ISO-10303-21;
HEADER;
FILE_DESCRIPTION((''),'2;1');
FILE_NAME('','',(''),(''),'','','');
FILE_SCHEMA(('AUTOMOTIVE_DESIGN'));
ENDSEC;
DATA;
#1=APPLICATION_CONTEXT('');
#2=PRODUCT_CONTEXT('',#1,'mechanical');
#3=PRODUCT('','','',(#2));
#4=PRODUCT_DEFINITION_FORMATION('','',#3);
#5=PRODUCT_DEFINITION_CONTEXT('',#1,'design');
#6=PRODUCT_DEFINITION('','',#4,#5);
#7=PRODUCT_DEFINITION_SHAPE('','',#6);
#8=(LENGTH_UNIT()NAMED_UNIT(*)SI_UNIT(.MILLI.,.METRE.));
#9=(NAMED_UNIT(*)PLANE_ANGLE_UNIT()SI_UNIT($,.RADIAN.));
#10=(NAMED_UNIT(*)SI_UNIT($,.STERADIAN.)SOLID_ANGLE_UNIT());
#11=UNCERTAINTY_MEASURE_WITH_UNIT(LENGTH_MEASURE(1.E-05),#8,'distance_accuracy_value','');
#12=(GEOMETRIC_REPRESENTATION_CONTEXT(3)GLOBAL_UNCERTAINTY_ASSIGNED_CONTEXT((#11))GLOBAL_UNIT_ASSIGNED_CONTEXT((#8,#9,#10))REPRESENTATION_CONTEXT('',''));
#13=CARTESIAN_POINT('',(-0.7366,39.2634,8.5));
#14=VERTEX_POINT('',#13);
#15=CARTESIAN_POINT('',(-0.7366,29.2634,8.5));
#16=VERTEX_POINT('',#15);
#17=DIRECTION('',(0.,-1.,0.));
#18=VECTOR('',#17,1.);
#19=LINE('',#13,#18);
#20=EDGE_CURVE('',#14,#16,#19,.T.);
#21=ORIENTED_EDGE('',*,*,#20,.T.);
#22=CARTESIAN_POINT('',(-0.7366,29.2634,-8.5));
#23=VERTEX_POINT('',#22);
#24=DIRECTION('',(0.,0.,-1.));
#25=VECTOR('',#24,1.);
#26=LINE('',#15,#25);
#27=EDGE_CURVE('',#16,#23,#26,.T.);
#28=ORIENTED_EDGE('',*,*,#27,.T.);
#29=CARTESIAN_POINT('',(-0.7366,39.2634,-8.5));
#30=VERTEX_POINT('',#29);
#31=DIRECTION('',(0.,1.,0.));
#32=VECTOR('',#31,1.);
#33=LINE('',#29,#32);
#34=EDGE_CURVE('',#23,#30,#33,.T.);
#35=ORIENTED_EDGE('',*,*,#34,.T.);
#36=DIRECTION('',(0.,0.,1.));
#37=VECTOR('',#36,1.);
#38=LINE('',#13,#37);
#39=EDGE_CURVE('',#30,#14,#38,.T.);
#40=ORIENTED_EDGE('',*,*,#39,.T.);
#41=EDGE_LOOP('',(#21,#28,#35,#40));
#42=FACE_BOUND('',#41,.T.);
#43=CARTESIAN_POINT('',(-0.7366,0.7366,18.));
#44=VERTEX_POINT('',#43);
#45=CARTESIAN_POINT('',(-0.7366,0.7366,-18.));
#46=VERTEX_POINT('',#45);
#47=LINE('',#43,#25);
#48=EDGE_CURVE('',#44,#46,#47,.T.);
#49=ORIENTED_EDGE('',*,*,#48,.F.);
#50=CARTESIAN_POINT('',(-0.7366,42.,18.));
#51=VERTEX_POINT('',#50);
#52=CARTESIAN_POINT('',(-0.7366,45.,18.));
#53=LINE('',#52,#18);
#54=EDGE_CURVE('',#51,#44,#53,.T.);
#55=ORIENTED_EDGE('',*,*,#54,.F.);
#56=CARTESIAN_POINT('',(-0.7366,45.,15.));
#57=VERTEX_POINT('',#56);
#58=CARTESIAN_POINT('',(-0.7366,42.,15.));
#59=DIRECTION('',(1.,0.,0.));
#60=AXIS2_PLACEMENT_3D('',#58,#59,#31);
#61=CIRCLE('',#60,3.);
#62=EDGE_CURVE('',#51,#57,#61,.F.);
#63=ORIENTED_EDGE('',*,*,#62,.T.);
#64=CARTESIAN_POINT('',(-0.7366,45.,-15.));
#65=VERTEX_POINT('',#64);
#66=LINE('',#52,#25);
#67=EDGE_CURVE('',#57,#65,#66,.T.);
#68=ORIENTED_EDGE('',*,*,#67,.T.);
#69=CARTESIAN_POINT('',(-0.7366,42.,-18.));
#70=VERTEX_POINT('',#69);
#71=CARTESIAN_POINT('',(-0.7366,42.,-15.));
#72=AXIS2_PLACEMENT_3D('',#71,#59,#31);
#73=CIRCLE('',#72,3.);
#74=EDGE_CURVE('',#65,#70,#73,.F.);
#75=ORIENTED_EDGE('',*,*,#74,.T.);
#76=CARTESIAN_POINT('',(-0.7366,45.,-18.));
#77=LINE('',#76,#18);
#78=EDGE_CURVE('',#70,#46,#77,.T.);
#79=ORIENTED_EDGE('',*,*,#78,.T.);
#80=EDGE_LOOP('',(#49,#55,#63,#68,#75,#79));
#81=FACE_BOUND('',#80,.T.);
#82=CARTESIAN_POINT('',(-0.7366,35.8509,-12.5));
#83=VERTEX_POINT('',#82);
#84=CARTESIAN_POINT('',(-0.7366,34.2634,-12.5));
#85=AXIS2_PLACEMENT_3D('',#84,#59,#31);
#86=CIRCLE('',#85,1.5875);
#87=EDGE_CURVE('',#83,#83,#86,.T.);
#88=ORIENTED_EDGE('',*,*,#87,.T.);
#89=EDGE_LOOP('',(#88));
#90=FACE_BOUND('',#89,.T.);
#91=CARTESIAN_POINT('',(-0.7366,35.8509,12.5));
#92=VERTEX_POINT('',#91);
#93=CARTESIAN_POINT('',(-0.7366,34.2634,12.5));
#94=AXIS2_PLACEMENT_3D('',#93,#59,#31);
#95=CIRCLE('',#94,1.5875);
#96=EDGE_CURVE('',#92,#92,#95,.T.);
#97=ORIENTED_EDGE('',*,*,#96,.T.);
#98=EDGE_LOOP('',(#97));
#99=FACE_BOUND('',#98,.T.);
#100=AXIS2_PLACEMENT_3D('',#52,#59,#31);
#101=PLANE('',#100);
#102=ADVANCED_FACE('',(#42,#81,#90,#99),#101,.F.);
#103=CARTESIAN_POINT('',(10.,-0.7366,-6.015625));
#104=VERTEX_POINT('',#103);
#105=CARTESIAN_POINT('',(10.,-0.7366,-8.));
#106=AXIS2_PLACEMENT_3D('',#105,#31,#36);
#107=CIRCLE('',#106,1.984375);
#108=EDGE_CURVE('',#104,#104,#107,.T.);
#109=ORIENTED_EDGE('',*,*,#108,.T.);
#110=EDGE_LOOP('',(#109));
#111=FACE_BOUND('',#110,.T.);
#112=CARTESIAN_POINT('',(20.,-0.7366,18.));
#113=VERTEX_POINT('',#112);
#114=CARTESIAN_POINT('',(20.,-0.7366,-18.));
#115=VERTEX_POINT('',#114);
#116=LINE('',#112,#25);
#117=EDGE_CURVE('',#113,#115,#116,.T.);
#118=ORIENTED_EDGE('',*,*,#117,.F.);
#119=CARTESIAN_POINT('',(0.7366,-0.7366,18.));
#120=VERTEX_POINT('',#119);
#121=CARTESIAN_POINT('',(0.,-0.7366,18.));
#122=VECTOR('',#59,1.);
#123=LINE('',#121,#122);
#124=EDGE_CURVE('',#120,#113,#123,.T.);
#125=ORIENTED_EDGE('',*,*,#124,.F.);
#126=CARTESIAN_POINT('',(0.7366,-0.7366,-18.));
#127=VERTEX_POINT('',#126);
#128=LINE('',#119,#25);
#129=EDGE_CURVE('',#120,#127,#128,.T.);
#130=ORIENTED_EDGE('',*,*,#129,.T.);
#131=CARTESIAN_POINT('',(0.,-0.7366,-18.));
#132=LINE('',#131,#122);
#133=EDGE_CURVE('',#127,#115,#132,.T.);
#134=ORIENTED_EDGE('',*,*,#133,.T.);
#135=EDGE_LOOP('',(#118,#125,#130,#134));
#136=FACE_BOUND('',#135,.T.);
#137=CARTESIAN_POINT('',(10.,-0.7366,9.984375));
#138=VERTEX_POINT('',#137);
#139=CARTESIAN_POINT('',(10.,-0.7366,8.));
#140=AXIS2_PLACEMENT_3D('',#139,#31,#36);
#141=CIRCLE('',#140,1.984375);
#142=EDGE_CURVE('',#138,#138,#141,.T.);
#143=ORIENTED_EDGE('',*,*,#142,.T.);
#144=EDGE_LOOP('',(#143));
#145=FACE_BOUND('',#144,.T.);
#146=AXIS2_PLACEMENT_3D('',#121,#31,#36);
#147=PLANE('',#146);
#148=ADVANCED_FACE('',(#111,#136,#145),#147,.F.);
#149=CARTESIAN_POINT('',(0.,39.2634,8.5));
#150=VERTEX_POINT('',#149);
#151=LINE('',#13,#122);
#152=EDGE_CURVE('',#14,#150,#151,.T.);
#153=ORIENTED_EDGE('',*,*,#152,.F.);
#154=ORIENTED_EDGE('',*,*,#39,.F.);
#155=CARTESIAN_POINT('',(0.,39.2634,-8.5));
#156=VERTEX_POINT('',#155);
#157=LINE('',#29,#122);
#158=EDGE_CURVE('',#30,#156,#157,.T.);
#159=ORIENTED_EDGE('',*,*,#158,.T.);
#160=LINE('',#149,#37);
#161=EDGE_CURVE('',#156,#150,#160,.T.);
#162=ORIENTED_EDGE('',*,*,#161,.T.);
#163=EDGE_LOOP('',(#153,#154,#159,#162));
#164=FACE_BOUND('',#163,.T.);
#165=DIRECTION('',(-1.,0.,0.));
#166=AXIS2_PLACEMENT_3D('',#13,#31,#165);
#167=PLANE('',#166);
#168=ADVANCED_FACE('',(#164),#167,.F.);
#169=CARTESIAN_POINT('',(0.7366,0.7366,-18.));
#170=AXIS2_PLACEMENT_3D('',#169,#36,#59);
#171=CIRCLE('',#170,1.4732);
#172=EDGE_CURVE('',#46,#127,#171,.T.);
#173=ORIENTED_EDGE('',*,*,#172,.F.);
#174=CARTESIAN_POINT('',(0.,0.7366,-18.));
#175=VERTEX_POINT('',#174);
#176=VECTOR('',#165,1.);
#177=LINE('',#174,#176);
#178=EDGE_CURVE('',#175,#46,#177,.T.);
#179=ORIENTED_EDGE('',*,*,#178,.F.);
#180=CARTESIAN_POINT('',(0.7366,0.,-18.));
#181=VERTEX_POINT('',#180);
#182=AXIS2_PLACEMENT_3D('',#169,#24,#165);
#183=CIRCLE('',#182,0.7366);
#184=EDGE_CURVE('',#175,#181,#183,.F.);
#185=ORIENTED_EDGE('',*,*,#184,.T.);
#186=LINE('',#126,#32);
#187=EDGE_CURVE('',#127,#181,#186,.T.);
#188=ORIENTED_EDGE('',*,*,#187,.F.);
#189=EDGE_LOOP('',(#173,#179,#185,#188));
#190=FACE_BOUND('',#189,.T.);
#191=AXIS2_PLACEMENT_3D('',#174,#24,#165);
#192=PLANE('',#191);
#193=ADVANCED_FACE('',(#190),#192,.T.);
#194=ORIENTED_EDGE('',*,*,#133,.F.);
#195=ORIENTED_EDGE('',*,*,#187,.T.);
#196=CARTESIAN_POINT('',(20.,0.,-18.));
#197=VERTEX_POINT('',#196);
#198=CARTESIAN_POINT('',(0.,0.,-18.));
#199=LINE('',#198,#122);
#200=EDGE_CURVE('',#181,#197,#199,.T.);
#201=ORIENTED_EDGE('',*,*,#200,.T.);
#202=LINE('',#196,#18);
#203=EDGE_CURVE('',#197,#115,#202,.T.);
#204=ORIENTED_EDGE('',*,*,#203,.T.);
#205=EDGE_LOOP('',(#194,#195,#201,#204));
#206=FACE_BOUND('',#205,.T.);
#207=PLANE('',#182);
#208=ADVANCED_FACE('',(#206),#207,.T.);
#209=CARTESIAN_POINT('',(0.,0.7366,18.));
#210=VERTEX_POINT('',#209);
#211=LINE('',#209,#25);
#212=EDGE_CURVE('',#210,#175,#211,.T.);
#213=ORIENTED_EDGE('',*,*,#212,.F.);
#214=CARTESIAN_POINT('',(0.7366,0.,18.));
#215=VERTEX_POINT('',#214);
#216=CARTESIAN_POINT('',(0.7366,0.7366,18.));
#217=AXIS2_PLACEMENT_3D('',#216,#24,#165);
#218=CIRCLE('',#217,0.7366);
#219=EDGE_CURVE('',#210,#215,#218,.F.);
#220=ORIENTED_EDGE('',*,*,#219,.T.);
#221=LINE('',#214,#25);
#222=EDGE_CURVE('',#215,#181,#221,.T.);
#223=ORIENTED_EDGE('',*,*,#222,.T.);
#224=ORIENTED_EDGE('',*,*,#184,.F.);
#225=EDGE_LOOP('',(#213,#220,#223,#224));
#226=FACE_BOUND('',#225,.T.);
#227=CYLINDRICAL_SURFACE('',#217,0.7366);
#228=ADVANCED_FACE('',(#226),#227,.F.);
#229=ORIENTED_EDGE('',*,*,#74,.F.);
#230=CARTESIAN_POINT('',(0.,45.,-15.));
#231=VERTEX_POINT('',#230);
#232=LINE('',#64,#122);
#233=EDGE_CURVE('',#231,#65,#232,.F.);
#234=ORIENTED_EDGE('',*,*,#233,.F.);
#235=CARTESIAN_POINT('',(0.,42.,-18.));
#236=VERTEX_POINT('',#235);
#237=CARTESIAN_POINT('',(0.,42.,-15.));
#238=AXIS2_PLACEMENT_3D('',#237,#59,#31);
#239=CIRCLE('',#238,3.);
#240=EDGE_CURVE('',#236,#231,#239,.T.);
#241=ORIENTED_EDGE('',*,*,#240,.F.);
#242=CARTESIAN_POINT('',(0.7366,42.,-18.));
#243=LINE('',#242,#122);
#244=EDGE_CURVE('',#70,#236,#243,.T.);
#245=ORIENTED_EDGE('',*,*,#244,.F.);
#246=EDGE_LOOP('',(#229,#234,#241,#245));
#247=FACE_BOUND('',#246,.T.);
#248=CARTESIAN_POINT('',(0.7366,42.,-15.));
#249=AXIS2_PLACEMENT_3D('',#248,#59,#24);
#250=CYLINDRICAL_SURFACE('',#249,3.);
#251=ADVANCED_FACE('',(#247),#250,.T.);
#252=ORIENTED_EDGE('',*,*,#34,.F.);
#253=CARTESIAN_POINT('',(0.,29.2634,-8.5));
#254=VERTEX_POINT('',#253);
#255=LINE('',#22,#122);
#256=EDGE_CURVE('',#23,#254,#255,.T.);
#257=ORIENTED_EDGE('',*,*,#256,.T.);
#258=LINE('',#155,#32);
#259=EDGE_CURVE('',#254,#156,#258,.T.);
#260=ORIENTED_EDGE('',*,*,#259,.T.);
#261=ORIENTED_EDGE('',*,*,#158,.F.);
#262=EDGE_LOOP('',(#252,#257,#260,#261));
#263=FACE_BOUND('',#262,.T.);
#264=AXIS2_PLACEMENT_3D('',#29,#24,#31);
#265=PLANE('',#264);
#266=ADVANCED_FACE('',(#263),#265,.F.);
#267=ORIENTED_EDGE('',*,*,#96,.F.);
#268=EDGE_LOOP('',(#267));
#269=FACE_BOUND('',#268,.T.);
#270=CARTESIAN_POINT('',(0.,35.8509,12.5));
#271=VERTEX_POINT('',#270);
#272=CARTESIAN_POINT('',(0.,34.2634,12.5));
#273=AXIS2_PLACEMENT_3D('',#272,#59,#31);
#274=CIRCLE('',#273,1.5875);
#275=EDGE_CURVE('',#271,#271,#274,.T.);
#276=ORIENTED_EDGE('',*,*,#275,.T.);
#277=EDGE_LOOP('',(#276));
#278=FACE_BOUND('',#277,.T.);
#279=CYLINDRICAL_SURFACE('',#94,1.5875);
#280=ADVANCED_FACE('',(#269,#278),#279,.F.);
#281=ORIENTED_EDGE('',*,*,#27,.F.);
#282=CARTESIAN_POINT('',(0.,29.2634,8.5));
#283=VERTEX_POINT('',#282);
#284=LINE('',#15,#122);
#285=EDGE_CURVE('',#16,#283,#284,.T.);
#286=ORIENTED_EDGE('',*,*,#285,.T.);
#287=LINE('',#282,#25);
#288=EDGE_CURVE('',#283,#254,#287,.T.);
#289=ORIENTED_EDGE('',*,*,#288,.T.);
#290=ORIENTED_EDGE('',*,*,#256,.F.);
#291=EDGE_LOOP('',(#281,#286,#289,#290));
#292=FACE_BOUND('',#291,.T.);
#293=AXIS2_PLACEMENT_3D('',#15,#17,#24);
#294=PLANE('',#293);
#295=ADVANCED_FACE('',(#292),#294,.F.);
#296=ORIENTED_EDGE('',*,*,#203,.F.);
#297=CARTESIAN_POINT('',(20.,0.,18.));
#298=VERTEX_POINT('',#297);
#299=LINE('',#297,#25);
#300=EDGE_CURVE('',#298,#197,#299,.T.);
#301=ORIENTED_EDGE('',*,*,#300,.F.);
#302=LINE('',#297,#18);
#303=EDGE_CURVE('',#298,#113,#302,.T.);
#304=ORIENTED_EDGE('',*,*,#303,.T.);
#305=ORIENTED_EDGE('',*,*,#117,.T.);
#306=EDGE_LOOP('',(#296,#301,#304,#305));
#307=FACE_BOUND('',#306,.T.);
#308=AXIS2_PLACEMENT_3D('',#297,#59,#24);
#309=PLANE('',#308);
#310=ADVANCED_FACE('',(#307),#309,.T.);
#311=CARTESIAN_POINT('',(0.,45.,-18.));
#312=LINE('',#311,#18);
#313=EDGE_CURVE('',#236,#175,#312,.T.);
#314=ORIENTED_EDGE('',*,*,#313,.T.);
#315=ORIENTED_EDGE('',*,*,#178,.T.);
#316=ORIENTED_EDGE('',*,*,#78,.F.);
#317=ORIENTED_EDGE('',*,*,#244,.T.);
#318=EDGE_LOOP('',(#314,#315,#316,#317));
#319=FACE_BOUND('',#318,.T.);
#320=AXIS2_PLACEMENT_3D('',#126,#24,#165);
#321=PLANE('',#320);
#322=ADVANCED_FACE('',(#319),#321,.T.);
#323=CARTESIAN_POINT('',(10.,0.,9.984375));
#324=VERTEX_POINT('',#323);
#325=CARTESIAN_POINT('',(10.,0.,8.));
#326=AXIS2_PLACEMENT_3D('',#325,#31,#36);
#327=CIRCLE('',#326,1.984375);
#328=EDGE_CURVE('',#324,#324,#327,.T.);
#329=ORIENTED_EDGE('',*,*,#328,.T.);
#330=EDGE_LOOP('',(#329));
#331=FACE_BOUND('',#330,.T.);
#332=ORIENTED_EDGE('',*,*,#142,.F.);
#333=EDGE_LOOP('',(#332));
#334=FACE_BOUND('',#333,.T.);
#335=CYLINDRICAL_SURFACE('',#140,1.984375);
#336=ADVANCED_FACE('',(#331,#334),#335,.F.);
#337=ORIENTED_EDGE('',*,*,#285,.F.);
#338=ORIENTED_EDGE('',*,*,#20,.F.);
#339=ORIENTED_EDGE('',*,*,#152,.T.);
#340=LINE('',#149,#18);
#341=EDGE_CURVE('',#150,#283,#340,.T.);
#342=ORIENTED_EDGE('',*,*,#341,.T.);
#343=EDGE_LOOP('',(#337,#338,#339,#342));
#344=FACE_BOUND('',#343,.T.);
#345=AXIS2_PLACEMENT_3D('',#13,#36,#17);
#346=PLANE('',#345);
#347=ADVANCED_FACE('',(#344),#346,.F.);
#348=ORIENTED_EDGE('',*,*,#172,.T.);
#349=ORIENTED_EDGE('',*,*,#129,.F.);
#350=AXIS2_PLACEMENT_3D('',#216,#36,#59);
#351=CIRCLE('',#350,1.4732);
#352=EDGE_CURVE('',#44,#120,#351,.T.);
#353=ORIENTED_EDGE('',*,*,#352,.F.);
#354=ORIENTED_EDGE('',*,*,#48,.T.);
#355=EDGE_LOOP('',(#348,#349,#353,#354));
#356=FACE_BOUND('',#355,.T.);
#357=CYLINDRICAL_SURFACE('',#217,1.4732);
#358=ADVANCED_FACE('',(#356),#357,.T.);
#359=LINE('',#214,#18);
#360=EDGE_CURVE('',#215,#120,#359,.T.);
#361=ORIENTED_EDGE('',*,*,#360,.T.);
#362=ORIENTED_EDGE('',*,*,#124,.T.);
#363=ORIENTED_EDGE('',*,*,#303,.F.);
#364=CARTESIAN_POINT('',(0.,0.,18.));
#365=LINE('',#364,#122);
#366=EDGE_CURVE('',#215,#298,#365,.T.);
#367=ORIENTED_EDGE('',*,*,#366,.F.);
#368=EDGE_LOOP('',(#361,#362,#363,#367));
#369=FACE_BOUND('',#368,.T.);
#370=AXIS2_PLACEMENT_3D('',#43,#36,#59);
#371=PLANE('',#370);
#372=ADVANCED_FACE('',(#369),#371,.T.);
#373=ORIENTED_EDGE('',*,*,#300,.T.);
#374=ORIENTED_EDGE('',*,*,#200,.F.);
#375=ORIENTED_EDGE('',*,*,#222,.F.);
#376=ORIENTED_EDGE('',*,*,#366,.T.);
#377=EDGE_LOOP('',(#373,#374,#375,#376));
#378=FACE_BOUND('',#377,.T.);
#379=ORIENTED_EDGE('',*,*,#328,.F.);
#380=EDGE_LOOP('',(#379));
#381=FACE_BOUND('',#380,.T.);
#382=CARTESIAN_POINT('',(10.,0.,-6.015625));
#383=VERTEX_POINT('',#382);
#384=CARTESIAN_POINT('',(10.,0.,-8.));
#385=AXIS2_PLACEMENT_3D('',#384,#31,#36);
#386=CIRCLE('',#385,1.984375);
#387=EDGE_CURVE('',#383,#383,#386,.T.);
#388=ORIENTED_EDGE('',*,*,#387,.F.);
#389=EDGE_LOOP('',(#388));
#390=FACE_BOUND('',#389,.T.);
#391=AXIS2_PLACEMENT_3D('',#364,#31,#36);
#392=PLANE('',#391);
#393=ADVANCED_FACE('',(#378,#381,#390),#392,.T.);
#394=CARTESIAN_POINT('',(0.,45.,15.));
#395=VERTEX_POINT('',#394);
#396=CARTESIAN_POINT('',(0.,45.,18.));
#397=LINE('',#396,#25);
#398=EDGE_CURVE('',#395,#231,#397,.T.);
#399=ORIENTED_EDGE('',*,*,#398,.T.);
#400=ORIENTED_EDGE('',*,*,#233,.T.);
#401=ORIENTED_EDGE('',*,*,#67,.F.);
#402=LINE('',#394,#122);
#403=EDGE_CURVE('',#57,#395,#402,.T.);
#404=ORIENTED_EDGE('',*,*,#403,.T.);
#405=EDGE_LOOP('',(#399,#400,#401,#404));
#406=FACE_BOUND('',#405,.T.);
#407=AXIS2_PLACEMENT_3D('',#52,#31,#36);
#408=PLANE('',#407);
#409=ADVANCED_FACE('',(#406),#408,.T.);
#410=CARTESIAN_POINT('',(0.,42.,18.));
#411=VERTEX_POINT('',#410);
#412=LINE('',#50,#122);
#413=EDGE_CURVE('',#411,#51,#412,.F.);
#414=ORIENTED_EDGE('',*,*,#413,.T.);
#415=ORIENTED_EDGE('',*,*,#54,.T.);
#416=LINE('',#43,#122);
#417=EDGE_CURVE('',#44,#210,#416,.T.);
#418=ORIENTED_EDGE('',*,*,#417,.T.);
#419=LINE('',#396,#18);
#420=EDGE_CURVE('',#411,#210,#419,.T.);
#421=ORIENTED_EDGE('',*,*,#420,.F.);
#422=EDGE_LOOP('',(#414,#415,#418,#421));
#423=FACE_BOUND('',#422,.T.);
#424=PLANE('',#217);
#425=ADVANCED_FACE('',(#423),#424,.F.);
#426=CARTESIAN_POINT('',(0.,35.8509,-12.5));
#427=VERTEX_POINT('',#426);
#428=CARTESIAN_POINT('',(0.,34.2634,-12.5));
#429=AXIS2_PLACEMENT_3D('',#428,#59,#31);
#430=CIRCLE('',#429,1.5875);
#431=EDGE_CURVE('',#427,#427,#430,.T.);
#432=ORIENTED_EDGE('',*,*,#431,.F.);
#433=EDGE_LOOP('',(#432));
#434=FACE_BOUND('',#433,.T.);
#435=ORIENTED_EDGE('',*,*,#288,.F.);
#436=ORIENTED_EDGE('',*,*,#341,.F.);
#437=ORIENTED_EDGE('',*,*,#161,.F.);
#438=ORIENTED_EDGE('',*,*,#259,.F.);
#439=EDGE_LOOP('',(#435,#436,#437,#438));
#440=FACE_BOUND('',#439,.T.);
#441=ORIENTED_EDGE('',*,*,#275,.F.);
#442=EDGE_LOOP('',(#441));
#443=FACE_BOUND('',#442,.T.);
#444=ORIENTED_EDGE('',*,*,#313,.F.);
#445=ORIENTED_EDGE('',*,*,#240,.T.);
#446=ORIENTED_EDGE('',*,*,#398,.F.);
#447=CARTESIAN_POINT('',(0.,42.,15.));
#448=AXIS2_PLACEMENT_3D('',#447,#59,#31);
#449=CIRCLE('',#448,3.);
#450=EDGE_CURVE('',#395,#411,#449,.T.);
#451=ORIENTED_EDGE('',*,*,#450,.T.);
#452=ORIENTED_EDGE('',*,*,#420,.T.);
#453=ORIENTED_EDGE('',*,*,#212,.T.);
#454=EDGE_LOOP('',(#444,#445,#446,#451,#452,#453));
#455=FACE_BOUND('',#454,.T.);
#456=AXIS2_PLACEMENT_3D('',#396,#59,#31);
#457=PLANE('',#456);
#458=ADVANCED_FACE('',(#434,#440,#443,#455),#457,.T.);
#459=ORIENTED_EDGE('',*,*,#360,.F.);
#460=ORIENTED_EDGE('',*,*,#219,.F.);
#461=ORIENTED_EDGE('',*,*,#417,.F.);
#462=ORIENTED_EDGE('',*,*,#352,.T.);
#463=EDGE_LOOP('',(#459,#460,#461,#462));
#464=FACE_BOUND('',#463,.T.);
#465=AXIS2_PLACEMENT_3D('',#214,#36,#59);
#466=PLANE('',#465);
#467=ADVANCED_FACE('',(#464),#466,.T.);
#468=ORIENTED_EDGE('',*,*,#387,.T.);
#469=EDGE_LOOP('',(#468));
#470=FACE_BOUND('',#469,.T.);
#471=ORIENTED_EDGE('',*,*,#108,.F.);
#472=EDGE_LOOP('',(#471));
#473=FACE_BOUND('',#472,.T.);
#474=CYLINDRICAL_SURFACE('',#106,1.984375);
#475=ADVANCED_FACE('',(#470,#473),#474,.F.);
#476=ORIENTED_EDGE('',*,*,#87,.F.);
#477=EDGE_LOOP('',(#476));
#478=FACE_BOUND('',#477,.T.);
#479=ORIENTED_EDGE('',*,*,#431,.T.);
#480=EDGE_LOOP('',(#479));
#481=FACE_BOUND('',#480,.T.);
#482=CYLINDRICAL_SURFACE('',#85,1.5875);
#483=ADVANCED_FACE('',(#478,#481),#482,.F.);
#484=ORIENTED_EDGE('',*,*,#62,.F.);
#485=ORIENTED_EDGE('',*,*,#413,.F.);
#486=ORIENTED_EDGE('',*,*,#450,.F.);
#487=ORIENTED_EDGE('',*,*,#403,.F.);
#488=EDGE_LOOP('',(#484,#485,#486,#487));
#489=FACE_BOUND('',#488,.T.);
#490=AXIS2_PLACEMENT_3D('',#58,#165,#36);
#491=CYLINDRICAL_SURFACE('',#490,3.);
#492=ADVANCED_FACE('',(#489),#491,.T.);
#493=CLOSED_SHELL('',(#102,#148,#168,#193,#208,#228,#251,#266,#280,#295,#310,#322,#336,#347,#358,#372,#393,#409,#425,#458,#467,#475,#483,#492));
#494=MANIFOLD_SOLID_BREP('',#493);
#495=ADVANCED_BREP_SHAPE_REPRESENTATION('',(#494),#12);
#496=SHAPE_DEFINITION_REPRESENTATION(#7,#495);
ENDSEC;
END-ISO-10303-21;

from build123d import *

# Parameters (mm, degrees)
BASE_FLANGE1_DEPTH = 18
SKETCH6_R          = 1.5875
SKETCH6_W          = 17
SKETCH6_H          = 10
CUT_EXTRUDE1_DEPTH = 53.430906916
SKETCH7_R          = 1.984375
CUT_EXTRUDE2_DEPTH = 53.430906916
FILLET1_R          = 3


# Sheet-metal steps are written as plain solids
with BuildPart() as part:
    # Sketch1 → Base-Flange1 (new, symmetric)
    with BuildSketch(Plane.XY):
        with BuildLine():
            Line((0, 45), (0, 0.7366))
            ThreePointArc((0, 0.7366), (0.215745145, 0.215745145), (0.7366, 0))
            Line((0.7366, 0), (20, 0))
            Line((20, 0), (20, -0.7366))
            Line((20, -0.7366), (0.7366, -0.7366))
            ThreePointArc((0.7366, -0.7366), (-0.30510971, -0.30510971), (-0.7366, 0.7366))
            Line((-0.7366, 0.7366), (-0.7366, 45))
            Line((-0.7366, 45), (0, 45))
        make_face()
    extrude(amount=BASE_FLANGE1_DEPTH, both=True)

    # Sketch6 → Cut-Extrude1 (cut, through all)
    with BuildSketch(Plane(origin=(0, 0, 0), x_dir=(0, 0, -1), z_dir=(1, 0, 0))):
        with Locations(Location((-12.5, 34.2634, 0), (0, 0, 90))):
            Circle(SKETCH6_R)
        with Locations(Location((12.5, 34.2634, 0), (0, 0, 90))):
            Circle(SKETCH6_R)
        with Locations((0, 34.2634)):
            Rectangle(SKETCH6_W, SKETCH6_H)
    extrude(amount=-CUT_EXTRUDE1_DEPTH, mode=Mode.SUBTRACT)

    # Sketch7 → Cut-Extrude2 (cut, through all)
    with BuildSketch(Plane(origin=(0, 0, 0), x_dir=(1, 0, 0), z_dir=(0, 1, 0))):
        with Locations(Location((10, 8, 0), (0, 0, 270))):
            Circle(SKETCH7_R)
        with Locations(Location((10, -8, 0), (0, 0, 270))):
            Circle(SKETCH7_R)
    extrude(amount=-CUT_EXTRUDE2_DEPTH, mode=Mode.SUBTRACT)

    # Fillet1
    fillet1_edges = [part.edges().sort_by_distance(p)[0] for p in [
        (-0.3683, 45, 18),
        (-0.3683, 45, -18),
    ]]
    fillet(fillet1_edges, radius=FILLET1_R)


solid = part.part
